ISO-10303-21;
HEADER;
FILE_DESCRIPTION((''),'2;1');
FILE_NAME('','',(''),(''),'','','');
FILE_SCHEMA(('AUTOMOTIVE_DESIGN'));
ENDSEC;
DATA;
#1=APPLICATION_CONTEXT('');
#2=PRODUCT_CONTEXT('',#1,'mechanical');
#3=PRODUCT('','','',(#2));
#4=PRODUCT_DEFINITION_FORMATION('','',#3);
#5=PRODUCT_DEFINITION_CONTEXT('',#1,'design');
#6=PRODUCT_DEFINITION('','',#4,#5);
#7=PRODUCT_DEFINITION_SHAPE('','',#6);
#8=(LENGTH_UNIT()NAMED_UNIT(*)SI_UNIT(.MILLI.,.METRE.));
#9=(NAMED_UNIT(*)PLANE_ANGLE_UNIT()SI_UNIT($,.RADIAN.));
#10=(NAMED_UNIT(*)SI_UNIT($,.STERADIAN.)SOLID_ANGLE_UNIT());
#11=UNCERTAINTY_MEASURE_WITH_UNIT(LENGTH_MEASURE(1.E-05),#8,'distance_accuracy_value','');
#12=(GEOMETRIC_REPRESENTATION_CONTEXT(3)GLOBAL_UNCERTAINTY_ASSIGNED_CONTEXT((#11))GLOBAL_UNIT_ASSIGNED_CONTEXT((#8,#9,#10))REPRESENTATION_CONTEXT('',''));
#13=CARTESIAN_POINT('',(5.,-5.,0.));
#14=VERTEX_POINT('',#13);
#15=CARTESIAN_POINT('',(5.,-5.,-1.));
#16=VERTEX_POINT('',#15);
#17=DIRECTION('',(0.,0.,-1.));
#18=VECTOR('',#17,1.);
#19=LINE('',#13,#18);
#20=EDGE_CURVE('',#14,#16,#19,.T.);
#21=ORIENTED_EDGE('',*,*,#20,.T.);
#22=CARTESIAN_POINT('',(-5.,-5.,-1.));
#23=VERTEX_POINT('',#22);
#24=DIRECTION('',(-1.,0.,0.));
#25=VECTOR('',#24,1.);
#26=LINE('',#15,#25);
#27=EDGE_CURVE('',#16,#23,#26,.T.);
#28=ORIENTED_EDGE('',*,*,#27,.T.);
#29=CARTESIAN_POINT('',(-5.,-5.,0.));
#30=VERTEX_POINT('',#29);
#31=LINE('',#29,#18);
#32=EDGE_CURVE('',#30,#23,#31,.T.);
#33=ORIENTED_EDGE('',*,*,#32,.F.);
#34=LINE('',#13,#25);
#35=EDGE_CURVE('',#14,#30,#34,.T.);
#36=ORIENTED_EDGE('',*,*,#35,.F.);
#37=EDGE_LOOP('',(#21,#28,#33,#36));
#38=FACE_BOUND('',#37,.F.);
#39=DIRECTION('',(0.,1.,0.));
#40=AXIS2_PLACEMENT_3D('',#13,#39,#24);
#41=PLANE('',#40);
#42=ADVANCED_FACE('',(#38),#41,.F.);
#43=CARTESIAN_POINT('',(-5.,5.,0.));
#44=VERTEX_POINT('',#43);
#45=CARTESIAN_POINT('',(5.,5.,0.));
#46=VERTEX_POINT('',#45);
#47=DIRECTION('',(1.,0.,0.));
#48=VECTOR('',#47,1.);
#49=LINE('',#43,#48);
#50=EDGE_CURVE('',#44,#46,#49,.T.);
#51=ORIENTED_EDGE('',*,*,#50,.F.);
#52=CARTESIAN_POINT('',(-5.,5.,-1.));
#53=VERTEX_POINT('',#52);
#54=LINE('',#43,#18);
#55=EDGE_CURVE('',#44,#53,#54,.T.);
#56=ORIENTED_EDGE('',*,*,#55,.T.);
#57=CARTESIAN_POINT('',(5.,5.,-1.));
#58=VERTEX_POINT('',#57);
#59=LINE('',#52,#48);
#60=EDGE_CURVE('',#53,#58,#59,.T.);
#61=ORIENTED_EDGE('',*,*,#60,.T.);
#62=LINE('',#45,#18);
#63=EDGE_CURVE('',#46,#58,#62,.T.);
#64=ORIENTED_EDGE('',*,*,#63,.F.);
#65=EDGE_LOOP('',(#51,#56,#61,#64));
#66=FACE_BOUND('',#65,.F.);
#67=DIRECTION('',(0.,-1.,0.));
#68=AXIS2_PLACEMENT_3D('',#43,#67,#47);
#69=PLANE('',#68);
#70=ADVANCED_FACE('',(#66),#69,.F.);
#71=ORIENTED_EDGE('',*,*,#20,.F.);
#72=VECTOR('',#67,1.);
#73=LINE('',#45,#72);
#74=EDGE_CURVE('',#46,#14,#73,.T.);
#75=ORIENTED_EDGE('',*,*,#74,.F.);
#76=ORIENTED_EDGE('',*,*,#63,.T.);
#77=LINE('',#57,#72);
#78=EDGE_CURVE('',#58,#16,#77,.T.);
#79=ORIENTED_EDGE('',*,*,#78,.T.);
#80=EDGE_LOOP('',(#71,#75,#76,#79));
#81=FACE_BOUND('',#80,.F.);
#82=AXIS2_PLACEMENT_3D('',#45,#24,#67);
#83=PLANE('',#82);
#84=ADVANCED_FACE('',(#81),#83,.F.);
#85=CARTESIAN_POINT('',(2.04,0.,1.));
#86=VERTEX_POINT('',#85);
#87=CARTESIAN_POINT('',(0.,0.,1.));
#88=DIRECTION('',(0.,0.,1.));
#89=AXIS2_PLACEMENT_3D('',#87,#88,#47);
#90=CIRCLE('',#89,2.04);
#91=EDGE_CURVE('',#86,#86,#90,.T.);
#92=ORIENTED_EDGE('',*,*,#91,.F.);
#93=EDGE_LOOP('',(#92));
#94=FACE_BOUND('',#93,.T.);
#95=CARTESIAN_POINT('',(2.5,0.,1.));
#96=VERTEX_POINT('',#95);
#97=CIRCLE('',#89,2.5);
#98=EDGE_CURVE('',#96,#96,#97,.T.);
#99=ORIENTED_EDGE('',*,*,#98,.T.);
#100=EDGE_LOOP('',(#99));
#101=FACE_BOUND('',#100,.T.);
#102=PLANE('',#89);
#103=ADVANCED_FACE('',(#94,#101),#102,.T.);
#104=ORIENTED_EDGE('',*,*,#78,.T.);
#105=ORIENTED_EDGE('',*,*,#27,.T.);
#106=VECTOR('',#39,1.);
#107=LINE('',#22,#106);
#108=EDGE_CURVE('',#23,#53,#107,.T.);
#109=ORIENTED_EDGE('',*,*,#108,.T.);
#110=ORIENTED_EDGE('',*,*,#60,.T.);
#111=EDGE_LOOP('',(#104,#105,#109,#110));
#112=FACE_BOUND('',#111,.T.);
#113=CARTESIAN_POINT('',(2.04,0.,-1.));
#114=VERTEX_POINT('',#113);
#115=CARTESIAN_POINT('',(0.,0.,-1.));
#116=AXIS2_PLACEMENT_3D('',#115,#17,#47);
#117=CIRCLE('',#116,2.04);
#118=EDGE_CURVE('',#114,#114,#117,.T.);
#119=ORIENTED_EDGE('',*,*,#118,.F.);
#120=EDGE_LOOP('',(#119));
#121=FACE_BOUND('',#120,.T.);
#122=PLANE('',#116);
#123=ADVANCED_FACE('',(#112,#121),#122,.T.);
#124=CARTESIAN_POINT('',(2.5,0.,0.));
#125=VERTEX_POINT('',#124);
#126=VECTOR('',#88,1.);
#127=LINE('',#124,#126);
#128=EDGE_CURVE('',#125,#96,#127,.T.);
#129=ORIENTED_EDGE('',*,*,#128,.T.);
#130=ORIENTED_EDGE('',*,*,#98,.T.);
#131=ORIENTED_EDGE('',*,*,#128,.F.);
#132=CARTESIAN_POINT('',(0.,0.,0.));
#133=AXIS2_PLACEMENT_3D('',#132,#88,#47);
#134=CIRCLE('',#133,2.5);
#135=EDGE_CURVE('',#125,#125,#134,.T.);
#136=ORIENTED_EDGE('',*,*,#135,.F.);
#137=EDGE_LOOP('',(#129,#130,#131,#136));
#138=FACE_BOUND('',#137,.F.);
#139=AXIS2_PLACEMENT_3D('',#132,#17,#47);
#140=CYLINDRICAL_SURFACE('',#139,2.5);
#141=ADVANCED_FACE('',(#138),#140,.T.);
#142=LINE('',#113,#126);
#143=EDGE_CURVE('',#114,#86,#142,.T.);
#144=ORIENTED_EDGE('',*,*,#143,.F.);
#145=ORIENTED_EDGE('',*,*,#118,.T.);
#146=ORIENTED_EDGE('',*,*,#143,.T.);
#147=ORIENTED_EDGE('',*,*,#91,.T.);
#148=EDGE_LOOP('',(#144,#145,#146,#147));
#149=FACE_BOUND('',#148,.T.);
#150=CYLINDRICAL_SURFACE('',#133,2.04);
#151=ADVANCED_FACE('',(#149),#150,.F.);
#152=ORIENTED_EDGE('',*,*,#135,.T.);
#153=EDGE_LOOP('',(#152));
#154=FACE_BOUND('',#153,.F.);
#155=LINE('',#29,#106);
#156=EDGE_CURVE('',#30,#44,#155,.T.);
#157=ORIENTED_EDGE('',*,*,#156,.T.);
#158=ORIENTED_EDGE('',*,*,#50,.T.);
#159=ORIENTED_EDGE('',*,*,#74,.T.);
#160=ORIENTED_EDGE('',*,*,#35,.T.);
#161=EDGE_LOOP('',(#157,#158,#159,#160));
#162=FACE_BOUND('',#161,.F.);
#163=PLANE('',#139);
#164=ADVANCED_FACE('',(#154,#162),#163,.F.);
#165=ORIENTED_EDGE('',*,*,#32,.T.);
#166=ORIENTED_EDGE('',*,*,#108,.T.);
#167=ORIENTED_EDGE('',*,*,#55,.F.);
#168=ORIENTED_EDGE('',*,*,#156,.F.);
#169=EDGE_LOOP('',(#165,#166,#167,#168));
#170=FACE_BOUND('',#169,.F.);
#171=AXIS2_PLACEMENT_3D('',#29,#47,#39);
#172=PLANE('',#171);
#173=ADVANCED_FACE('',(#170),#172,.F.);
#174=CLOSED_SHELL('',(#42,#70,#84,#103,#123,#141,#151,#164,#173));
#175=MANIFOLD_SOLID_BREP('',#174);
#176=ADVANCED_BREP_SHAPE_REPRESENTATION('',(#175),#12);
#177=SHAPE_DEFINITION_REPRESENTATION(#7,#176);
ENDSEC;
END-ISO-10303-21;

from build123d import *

# Parameters (mm, degrees)
F0_R     = 2.5
F0_R_2   = 2.04
F1_DEPTH = 1
F2_R     = 2.5
F2_R_2   = 2.04
F3_DEPTH = 1


with BuildPart() as f1:
    # F0 (on Top) → F1 (new body)
    with BuildSketch(Plane.XY):
        Circle(F0_R)
        Circle(F0_R_2, mode=Mode.SUBTRACT)
    extrude(amount=F1_DEPTH)

    # F2 (on face) → F3 (join)
    with BuildSketch(Plane(origin=(0, 0, 0), x_dir=(1, 0, 0), z_dir=(0, 0, -1))):
        with BuildLine():
            ThreePointArc((0, -5), (3.5355339059, -3.5355339059), (5, 0))
            ThreePointArc((5, 0), (3.5355339059, 3.5355339059), (0, 5))
            ThreePointArc((0, 5), (-3.5355339059, 3.5355339059), (-5, 0))
            ThreePointArc((-5, 0), (-3.5355339059, -3.5355339059), (0, -5))
        make_face()
        Circle(F2_R, mode=Mode.SUBTRACT)
        with BuildLine():
            Line((5, -5), (5, 0))
            ThreePointArc((5, 0), (3.5355339059, -3.5355339059), (0, -5))
            Line((0, -5), (5, -5))
        make_face()
        with BuildLine():
            ThreePointArc((0, 5), (3.5355339059, 3.5355339059), (5, 0))
            Line((5, 0), (5, 5))
            Line((5, 5), (0, 5))
        make_face()
        with BuildLine():
            ThreePointArc((-5, 0), (-3.5355339059, 3.5355339059), (0, 5))
            Line((0, 5), (-5, 5))
            Line((-5, 5), (-5, 0))
        make_face()
        with BuildLine():
            Line((-5, -5), (0, -5))
            ThreePointArc((0, -5), (-3.5355339059, -3.5355339059), (-5, 0))
            Line((-5, 0), (-5, -5))
        make_face()
        Circle(F2_R)
        Circle(F2_R_2, mode=Mode.SUBTRACT)
    extrude(amount=F3_DEPTH)


solid = f1.part
